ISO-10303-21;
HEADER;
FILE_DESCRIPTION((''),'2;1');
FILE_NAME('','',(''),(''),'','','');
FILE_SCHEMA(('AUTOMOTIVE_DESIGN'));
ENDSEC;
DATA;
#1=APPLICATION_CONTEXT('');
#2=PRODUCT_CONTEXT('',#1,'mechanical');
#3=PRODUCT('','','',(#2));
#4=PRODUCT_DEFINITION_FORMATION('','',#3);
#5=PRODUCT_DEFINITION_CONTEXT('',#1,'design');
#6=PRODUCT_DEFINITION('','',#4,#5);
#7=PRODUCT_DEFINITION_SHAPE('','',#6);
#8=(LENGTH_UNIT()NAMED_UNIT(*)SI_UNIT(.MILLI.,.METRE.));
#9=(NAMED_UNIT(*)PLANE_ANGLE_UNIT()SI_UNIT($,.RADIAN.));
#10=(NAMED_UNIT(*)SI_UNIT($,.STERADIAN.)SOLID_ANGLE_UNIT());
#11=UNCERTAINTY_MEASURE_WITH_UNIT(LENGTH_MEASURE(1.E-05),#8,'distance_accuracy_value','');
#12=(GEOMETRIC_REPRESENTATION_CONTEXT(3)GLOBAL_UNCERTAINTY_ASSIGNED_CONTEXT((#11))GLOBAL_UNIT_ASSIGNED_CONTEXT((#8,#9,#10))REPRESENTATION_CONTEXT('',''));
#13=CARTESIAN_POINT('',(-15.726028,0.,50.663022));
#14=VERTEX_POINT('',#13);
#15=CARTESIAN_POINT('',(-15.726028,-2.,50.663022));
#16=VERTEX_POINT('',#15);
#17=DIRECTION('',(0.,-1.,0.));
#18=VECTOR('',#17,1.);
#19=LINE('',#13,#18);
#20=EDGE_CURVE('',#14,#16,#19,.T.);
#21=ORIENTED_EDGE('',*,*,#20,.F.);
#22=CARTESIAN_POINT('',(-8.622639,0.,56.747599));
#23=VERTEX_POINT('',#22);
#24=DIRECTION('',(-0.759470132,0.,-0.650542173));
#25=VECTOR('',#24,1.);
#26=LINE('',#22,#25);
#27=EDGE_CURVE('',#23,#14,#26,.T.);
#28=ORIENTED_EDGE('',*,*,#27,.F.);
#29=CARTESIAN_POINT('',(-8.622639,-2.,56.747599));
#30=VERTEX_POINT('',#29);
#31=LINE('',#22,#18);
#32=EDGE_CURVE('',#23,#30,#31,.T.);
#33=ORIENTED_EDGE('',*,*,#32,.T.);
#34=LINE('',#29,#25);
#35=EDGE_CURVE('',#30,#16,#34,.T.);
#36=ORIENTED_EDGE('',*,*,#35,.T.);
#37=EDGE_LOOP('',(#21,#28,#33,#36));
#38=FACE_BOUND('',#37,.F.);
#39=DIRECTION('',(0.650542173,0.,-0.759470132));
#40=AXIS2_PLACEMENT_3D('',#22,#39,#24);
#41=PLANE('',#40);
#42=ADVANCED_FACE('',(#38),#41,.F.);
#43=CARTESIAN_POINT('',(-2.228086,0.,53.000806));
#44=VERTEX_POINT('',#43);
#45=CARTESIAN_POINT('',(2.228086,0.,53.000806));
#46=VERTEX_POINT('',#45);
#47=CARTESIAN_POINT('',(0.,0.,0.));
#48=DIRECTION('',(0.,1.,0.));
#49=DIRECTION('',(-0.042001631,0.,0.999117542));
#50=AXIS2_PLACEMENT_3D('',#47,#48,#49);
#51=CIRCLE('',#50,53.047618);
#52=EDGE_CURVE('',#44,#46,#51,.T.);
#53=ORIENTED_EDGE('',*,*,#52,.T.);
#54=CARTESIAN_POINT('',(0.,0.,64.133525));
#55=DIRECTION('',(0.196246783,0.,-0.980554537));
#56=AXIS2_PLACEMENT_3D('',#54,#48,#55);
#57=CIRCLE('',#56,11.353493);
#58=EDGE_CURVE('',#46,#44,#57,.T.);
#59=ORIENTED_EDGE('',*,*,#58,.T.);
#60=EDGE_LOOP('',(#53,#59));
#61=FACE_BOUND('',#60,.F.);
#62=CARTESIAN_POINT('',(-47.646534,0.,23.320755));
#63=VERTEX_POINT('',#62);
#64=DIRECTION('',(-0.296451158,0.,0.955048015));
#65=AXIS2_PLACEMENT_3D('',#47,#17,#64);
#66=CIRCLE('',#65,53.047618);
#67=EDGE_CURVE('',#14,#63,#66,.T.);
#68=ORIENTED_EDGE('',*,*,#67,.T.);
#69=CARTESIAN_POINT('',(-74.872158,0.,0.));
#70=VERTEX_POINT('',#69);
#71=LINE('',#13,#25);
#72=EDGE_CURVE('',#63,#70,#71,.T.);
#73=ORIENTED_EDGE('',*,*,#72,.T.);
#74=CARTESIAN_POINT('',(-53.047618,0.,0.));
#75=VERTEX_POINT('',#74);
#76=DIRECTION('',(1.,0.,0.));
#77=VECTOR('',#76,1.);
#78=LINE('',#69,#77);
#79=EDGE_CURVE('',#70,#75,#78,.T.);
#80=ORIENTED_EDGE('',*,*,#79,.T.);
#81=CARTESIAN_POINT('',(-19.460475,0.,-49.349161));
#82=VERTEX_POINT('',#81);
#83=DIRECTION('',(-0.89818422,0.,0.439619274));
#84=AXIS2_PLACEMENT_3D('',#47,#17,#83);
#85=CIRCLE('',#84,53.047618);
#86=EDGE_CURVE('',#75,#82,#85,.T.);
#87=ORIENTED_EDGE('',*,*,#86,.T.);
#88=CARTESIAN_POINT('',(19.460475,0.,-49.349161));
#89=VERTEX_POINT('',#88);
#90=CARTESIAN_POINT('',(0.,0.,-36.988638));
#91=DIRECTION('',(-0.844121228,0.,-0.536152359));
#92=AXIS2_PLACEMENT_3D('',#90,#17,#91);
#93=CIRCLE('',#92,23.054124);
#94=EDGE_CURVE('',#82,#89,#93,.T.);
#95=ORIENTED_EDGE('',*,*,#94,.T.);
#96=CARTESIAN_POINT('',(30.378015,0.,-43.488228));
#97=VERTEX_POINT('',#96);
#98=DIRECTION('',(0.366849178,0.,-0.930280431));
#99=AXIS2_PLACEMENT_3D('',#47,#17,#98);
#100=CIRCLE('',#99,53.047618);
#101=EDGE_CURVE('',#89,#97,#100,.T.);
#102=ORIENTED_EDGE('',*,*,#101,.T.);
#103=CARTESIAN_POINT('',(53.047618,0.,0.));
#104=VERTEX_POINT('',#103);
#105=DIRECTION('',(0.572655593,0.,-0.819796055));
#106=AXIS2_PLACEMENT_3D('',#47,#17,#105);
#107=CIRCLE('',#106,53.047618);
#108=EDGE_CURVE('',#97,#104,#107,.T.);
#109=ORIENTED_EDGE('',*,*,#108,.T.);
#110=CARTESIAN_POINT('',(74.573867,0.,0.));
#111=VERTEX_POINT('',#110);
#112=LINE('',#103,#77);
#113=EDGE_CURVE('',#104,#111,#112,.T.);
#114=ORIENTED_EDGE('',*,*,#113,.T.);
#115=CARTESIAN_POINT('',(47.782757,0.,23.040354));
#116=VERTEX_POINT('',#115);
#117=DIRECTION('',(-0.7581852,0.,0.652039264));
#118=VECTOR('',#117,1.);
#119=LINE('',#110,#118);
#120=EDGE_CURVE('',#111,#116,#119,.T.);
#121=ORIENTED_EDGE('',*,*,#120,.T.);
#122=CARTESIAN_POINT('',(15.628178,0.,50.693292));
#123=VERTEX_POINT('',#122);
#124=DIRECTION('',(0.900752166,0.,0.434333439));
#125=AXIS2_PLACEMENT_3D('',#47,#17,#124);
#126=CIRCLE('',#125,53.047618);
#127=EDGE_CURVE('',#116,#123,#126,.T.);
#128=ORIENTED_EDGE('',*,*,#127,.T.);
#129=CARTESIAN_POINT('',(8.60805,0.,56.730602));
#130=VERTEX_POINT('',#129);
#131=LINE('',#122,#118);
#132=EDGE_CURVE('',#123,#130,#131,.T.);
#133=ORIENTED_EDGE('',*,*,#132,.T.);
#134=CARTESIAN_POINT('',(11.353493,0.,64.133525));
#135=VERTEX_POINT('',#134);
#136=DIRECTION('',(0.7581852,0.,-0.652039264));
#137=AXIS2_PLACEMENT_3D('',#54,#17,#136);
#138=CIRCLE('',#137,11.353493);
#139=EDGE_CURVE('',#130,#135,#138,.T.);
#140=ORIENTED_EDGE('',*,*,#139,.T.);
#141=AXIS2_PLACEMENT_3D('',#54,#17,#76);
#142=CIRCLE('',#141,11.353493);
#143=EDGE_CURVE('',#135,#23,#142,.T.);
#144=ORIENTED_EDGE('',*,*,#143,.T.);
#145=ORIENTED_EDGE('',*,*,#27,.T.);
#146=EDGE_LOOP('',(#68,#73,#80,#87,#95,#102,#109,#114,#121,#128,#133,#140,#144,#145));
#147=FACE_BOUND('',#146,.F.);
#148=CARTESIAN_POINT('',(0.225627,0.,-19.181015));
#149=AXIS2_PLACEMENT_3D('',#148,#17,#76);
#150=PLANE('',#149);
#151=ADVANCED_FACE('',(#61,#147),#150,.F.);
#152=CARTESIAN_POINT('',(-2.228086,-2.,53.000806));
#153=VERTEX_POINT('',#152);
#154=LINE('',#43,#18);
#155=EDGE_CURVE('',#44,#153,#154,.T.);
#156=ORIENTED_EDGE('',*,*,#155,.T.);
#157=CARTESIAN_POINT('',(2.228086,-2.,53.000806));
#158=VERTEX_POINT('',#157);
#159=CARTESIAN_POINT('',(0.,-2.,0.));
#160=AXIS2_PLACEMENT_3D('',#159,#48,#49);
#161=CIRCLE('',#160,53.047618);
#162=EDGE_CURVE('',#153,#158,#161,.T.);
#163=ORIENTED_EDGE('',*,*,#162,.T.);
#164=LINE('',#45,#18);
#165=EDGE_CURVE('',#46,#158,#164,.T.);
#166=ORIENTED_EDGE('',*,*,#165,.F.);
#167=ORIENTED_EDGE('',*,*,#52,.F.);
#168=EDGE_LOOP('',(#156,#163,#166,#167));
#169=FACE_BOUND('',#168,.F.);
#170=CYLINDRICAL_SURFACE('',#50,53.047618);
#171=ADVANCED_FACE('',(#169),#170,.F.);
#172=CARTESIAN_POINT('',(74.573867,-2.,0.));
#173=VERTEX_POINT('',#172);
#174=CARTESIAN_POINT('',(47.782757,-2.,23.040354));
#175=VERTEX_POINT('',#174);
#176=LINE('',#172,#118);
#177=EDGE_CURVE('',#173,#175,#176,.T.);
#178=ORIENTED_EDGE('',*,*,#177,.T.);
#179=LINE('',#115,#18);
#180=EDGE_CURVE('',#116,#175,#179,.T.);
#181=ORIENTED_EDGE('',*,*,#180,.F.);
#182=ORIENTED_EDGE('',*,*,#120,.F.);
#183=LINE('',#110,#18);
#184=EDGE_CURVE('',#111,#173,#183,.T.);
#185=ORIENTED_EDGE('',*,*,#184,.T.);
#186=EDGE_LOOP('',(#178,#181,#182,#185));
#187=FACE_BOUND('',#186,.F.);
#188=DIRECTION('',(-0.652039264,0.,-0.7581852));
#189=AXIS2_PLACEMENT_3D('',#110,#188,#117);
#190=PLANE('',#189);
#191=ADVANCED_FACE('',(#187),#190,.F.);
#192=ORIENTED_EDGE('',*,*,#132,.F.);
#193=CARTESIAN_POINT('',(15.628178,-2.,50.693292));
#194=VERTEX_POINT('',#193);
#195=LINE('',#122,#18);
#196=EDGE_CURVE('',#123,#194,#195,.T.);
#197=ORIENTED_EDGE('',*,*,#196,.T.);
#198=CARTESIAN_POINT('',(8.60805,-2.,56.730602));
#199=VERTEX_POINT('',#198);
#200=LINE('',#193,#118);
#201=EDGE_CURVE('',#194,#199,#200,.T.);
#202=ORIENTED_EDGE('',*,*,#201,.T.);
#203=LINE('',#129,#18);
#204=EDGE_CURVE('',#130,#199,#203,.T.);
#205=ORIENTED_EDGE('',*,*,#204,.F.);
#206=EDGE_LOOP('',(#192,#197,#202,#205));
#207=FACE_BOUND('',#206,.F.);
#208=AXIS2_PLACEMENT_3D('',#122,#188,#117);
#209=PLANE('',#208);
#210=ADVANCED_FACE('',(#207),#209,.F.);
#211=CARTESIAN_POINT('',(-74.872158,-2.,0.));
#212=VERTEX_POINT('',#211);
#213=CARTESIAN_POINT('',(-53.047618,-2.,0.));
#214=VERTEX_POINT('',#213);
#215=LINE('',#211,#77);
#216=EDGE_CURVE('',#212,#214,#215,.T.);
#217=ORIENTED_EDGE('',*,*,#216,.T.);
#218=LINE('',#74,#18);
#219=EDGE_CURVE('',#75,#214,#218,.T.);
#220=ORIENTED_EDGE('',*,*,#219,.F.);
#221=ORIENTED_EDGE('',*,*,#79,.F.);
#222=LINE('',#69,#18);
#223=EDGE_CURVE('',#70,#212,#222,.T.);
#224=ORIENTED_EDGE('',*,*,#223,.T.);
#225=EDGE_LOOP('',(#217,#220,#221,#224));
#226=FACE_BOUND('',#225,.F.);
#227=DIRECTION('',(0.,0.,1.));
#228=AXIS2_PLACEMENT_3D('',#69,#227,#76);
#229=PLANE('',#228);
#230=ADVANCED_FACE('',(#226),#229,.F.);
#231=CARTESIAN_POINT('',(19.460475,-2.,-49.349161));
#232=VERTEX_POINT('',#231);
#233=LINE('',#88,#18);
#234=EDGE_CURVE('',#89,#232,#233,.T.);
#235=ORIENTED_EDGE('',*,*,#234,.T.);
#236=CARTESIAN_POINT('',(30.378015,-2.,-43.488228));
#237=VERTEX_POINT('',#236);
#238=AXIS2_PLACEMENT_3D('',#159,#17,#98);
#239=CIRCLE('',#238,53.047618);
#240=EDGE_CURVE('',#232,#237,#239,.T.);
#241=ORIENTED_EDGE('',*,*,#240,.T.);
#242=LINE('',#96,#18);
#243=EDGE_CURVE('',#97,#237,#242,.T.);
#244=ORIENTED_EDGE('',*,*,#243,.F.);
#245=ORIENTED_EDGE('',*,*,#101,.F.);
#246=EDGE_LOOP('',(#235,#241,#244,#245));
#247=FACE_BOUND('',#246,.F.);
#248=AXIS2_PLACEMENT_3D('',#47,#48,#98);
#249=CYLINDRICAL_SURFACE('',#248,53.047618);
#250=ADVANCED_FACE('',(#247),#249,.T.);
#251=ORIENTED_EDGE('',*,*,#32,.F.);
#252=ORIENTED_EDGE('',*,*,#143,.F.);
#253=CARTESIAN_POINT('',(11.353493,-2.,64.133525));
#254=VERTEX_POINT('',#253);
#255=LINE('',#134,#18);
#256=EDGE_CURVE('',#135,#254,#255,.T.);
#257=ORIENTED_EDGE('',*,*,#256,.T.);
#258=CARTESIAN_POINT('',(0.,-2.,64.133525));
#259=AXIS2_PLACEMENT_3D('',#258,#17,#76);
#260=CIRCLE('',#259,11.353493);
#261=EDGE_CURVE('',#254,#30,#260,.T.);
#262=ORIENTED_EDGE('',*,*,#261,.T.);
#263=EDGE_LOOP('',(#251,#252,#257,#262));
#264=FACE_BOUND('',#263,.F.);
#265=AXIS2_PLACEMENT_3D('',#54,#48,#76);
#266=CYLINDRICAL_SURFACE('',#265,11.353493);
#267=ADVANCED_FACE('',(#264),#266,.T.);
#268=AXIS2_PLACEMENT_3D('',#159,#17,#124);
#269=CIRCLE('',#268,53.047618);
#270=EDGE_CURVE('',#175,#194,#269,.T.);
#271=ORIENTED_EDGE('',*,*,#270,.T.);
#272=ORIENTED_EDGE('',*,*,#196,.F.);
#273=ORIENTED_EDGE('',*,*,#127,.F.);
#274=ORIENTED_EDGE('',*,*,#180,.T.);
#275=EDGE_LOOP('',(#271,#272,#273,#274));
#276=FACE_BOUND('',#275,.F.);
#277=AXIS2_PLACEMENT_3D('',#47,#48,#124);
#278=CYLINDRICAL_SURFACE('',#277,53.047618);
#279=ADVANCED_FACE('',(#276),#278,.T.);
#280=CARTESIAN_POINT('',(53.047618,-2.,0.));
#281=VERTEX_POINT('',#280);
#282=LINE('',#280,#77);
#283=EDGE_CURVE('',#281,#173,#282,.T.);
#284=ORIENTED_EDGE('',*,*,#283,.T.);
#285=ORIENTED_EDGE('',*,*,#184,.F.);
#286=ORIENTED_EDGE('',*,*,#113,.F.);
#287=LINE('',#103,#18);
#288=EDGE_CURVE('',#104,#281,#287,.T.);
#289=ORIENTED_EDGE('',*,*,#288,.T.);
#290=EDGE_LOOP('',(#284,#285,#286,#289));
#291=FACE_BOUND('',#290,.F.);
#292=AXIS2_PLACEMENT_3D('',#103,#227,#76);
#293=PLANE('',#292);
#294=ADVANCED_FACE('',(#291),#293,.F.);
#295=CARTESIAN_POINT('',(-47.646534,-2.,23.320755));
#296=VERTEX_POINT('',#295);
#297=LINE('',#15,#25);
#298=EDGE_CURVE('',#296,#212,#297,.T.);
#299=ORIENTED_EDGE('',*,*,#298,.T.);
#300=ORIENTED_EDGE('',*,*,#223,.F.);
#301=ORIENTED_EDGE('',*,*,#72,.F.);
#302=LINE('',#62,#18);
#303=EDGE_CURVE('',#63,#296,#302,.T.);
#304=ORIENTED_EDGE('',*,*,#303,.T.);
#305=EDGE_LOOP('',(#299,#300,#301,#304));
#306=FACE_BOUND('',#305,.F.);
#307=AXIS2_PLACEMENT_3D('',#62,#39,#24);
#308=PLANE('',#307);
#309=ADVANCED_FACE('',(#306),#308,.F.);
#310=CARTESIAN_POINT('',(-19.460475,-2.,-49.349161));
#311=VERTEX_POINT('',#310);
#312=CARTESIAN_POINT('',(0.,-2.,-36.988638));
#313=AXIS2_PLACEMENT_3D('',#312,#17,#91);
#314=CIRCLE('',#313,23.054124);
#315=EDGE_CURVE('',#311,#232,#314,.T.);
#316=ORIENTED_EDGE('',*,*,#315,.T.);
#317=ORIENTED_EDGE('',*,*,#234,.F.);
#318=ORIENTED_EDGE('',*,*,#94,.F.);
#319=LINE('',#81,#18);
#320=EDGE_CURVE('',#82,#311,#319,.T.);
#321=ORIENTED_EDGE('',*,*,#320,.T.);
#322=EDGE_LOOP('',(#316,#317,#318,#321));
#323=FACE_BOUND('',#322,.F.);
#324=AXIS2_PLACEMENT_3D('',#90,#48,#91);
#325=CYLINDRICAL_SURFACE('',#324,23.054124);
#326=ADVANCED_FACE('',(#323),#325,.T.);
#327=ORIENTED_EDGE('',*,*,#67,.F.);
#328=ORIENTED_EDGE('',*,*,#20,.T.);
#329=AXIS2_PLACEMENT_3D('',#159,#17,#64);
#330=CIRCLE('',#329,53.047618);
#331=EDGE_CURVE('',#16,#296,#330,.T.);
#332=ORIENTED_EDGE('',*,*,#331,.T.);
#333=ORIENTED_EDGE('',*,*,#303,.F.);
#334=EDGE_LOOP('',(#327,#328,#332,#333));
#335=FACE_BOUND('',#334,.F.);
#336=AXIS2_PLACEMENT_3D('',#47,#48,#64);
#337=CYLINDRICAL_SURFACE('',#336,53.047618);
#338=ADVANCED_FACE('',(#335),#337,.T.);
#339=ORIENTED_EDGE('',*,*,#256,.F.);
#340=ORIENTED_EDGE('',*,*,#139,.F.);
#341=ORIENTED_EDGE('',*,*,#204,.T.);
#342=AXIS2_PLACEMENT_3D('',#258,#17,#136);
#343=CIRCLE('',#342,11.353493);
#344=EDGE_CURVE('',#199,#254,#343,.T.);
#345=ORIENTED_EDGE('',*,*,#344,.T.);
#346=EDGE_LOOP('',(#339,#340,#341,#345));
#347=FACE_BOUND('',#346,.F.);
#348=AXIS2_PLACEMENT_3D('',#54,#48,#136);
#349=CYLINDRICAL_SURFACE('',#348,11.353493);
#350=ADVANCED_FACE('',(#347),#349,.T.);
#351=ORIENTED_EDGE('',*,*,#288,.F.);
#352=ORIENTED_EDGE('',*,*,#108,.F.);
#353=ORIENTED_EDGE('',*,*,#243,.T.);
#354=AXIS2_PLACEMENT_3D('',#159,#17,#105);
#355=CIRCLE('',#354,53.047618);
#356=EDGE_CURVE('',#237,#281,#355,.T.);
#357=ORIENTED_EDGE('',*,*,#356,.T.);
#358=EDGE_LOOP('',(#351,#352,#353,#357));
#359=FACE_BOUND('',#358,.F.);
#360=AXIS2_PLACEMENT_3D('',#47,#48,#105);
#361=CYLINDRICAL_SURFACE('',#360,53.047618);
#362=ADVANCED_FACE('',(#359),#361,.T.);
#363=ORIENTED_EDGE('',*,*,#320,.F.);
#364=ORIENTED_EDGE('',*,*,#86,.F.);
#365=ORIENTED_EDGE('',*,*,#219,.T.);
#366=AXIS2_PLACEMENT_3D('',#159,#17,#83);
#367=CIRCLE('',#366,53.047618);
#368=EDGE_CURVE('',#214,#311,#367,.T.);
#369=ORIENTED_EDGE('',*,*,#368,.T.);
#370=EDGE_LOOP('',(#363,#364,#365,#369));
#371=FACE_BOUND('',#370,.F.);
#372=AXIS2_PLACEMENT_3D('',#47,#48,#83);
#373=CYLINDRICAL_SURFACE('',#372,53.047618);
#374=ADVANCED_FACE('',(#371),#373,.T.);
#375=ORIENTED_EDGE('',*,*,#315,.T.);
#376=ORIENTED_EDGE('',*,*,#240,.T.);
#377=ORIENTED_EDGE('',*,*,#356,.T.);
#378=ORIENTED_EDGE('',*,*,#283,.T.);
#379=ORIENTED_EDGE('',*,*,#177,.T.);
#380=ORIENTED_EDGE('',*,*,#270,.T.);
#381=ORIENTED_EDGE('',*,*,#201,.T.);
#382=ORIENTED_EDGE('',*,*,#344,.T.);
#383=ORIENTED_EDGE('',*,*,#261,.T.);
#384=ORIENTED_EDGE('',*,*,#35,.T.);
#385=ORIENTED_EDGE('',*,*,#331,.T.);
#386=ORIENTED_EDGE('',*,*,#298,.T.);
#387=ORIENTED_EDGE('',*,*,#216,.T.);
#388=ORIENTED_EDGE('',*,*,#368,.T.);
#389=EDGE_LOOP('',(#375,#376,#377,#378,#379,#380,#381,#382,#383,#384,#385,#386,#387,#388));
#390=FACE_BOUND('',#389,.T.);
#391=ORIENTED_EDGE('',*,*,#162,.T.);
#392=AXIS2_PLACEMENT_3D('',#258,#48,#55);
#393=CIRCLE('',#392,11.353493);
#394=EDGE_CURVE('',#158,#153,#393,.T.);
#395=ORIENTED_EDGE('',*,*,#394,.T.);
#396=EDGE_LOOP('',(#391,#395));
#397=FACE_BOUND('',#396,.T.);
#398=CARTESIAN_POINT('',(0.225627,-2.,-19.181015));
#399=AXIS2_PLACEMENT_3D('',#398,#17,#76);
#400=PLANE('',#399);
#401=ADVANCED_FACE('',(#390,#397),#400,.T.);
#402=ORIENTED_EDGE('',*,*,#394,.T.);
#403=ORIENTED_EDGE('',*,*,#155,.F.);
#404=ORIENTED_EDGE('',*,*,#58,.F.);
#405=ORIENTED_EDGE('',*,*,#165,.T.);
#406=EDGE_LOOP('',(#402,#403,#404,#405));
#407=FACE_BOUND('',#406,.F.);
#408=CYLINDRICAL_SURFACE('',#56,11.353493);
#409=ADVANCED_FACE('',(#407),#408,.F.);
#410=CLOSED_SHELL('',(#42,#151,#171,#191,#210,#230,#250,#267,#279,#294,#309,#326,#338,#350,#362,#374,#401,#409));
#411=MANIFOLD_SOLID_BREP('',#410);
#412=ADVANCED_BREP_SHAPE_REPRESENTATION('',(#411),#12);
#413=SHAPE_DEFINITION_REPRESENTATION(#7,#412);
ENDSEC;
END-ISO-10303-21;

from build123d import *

# Parameters (mm, degrees)
F1_DEPTH = 2


# Not quite as in the source:
# - a feature names something its author has since deleted; it is built from what else it names


with BuildPart() as f1:
    # F0 (on Front) → F1 (new body)
    with BuildSketch(Plane.XZ):
        with BuildLine():
            ThreePointArc((19.4604751144, -49.3491610835), (25.0909627965, -46.7385641336), (30.3780152375, -43.4882280802))
            ThreePointArc((30.3780152375, -43.4882280802), (47.0400422182, -24.5210974354), (53.0476181494, 0))
            Line((53.0476181494, 0), (-53.0476181494, 0))
            ThreePointArc((-53.0476181494, 0), (-43.8541995948, -29.8472606654), (-19.4604751144, -49.3491610835))
            ThreePointArc((-19.4604751144, -49.3491610835), (-6.4361640705, -14.8511496358), (23.054123582, -36.9886383414))
            ThreePointArc((23.054123582, -36.9886383414), (22.1374887057, -43.4248024119), (19.4604751144, -49.3491610835))
        make_face()
        with BuildLine():
            Line((-53.0476181494, 0), (53.0476181494, 0))
            ThreePointArc((53.0476181494, 0), (51.7146557328, 11.817113597), (47.7827569309, 23.0403544115))
            Line((47.7827569309, 23.0403544115), (15.6281781272, 50.6932918615))
            ThreePointArc((15.6281781272, 50.6932918615), (9.002371997, 52.2781702984), (2.2280864718, 53.0008058618))
            ThreePointArc((2.2280864718, 53.0008058618), (0, 52.7800319348), (-2.2280864718, 53.0008058618))
            ThreePointArc((-2.2280864718, 53.0008058618), (-9.0528372764, 52.2694550246), (-15.7260278086, 50.6630224196))
            Line((-15.7260278086, 50.6630224196), (-47.6465335474, 23.3207553961))
            ThreePointArc((-47.6465335474, 23.3207553961), (-51.6797102792, 11.9690156981), (-53.0476181494, 0))
        make_face()
        with BuildLine():
            ThreePointArc((47.7827569309, 23.0403544115), (51.7146557328, 11.817113597), (53.0476181494, 0))
            Line((53.0476181494, 0), (74.573867023, 0))
            Line((74.573867023, 0), (47.7827569309, 23.0403544115))
        make_face()
        with BuildLine():
            ThreePointArc((-19.4604751144, -49.3491610835), (0, -60.0427619235), (19.4604751144, -49.3491610835))
            ThreePointArc((19.4604751144, -49.3491610835), (0, -53.0476181494), (-19.4604751144, -49.3491610835))
        make_face()
        with BuildLine():
            ThreePointArc((-19.4604751144, -49.3491610835), (0, -53.0476181494), (19.4604751144, -49.3491610835))
            ThreePointArc((19.4604751144, -49.3491610835), (22.1374887057, -43.4248024119), (23.054123582, -36.9886383414))
            ThreePointArc((23.054123582, -36.9886383414), (-6.4361640705, -14.8511496358), (-19.4604751144, -49.3491610835))
        make_face()
        with BuildLine():
            Line((15.6281781272, 50.6932918615), (47.7827569309, 23.0403544115))
            ThreePointArc((47.7827569309, 23.0403544115), (34.5891299202, 40.2199189791), (15.6281781272, 50.6932918615))
        make_face()
        with BuildLine():
            Line((-74.8721584678, 0), (-53.0476181494, 0))
            ThreePointArc((-53.0476181494, 0), (-51.6797102792, 11.9690156981), (-47.6465335474, 23.3207553961))
            Line((-47.6465335474, 23.3207553961), (-74.8721584678, 0))
        make_face()
        with BuildLine():
            ThreePointArc((2.2280864718, 53.0008058618), (9.002371997, 52.2781702984), (15.6281781272, 50.6932918615))
            Line((15.6281781272, 50.6932918615), (8.6080503312, 56.7306016959))
            ThreePointArc((8.6080503312, 56.7306016959), (5.730035728, 54.3320712807), (2.2280864718, 53.0008058618))
        make_face()
        with BuildLine():
            ThreePointArc((-15.7260278086, 50.6630224196), (-34.5097127589, 40.2880815704), (-47.6465335474, 23.3207553961))
            Line((-47.6465335474, 23.3207553961), (-15.7260278086, 50.6630224196))
        make_face()
        with BuildLine():
            ThreePointArc((-2.2280864718, 53.0008058618), (0, 53.0476181494), (2.2280864718, 53.0008058618))
            ThreePointArc((2.2280864718, 53.0008058618), (5.730035728, 54.3320712807), (8.6080503312, 56.7306016959))
            Line((8.6080503312, 56.7306016959), (0, 64.1335248947))
            Line((0, 64.1335248947), (-8.6226387996, 56.7475989187))
            ThreePointArc((-8.6226387996, 56.7475989187), (-5.7397015847, 54.3377284437), (-2.2280864718, 53.0008058618))
        make_face()
        with BuildLine():
            Line((0, 64.1335248947), (8.6080503312, 56.7306016959))
            ThreePointArc((8.6080503312, 56.7306016959), (10.6450279761, 60.1857176833), (11.3534929599, 64.1335248947))
            ThreePointArc((11.3534929599, 64.1335248947), (-3.9373045021, 74.7824420063), (-8.6226387996, 56.7475989187))
            Line((-8.6226387996, 56.7475989187), (0, 64.1335248947))
        make_face()
        with BuildLine():
            Line((-8.6226387996, 56.7475989187), (-15.7260278086, 50.6630224196))
            ThreePointArc((-15.7260278086, 50.6630224196), (-9.0528372764, 52.2694550246), (-2.2280864718, 53.0008058618))
            ThreePointArc((-2.2280864718, 53.0008058618), (-5.7397015847, 54.3377284437), (-8.6226387996, 56.7475989187))
        make_face()
    extrude(amount=F1_DEPTH)


solid = f1.part
